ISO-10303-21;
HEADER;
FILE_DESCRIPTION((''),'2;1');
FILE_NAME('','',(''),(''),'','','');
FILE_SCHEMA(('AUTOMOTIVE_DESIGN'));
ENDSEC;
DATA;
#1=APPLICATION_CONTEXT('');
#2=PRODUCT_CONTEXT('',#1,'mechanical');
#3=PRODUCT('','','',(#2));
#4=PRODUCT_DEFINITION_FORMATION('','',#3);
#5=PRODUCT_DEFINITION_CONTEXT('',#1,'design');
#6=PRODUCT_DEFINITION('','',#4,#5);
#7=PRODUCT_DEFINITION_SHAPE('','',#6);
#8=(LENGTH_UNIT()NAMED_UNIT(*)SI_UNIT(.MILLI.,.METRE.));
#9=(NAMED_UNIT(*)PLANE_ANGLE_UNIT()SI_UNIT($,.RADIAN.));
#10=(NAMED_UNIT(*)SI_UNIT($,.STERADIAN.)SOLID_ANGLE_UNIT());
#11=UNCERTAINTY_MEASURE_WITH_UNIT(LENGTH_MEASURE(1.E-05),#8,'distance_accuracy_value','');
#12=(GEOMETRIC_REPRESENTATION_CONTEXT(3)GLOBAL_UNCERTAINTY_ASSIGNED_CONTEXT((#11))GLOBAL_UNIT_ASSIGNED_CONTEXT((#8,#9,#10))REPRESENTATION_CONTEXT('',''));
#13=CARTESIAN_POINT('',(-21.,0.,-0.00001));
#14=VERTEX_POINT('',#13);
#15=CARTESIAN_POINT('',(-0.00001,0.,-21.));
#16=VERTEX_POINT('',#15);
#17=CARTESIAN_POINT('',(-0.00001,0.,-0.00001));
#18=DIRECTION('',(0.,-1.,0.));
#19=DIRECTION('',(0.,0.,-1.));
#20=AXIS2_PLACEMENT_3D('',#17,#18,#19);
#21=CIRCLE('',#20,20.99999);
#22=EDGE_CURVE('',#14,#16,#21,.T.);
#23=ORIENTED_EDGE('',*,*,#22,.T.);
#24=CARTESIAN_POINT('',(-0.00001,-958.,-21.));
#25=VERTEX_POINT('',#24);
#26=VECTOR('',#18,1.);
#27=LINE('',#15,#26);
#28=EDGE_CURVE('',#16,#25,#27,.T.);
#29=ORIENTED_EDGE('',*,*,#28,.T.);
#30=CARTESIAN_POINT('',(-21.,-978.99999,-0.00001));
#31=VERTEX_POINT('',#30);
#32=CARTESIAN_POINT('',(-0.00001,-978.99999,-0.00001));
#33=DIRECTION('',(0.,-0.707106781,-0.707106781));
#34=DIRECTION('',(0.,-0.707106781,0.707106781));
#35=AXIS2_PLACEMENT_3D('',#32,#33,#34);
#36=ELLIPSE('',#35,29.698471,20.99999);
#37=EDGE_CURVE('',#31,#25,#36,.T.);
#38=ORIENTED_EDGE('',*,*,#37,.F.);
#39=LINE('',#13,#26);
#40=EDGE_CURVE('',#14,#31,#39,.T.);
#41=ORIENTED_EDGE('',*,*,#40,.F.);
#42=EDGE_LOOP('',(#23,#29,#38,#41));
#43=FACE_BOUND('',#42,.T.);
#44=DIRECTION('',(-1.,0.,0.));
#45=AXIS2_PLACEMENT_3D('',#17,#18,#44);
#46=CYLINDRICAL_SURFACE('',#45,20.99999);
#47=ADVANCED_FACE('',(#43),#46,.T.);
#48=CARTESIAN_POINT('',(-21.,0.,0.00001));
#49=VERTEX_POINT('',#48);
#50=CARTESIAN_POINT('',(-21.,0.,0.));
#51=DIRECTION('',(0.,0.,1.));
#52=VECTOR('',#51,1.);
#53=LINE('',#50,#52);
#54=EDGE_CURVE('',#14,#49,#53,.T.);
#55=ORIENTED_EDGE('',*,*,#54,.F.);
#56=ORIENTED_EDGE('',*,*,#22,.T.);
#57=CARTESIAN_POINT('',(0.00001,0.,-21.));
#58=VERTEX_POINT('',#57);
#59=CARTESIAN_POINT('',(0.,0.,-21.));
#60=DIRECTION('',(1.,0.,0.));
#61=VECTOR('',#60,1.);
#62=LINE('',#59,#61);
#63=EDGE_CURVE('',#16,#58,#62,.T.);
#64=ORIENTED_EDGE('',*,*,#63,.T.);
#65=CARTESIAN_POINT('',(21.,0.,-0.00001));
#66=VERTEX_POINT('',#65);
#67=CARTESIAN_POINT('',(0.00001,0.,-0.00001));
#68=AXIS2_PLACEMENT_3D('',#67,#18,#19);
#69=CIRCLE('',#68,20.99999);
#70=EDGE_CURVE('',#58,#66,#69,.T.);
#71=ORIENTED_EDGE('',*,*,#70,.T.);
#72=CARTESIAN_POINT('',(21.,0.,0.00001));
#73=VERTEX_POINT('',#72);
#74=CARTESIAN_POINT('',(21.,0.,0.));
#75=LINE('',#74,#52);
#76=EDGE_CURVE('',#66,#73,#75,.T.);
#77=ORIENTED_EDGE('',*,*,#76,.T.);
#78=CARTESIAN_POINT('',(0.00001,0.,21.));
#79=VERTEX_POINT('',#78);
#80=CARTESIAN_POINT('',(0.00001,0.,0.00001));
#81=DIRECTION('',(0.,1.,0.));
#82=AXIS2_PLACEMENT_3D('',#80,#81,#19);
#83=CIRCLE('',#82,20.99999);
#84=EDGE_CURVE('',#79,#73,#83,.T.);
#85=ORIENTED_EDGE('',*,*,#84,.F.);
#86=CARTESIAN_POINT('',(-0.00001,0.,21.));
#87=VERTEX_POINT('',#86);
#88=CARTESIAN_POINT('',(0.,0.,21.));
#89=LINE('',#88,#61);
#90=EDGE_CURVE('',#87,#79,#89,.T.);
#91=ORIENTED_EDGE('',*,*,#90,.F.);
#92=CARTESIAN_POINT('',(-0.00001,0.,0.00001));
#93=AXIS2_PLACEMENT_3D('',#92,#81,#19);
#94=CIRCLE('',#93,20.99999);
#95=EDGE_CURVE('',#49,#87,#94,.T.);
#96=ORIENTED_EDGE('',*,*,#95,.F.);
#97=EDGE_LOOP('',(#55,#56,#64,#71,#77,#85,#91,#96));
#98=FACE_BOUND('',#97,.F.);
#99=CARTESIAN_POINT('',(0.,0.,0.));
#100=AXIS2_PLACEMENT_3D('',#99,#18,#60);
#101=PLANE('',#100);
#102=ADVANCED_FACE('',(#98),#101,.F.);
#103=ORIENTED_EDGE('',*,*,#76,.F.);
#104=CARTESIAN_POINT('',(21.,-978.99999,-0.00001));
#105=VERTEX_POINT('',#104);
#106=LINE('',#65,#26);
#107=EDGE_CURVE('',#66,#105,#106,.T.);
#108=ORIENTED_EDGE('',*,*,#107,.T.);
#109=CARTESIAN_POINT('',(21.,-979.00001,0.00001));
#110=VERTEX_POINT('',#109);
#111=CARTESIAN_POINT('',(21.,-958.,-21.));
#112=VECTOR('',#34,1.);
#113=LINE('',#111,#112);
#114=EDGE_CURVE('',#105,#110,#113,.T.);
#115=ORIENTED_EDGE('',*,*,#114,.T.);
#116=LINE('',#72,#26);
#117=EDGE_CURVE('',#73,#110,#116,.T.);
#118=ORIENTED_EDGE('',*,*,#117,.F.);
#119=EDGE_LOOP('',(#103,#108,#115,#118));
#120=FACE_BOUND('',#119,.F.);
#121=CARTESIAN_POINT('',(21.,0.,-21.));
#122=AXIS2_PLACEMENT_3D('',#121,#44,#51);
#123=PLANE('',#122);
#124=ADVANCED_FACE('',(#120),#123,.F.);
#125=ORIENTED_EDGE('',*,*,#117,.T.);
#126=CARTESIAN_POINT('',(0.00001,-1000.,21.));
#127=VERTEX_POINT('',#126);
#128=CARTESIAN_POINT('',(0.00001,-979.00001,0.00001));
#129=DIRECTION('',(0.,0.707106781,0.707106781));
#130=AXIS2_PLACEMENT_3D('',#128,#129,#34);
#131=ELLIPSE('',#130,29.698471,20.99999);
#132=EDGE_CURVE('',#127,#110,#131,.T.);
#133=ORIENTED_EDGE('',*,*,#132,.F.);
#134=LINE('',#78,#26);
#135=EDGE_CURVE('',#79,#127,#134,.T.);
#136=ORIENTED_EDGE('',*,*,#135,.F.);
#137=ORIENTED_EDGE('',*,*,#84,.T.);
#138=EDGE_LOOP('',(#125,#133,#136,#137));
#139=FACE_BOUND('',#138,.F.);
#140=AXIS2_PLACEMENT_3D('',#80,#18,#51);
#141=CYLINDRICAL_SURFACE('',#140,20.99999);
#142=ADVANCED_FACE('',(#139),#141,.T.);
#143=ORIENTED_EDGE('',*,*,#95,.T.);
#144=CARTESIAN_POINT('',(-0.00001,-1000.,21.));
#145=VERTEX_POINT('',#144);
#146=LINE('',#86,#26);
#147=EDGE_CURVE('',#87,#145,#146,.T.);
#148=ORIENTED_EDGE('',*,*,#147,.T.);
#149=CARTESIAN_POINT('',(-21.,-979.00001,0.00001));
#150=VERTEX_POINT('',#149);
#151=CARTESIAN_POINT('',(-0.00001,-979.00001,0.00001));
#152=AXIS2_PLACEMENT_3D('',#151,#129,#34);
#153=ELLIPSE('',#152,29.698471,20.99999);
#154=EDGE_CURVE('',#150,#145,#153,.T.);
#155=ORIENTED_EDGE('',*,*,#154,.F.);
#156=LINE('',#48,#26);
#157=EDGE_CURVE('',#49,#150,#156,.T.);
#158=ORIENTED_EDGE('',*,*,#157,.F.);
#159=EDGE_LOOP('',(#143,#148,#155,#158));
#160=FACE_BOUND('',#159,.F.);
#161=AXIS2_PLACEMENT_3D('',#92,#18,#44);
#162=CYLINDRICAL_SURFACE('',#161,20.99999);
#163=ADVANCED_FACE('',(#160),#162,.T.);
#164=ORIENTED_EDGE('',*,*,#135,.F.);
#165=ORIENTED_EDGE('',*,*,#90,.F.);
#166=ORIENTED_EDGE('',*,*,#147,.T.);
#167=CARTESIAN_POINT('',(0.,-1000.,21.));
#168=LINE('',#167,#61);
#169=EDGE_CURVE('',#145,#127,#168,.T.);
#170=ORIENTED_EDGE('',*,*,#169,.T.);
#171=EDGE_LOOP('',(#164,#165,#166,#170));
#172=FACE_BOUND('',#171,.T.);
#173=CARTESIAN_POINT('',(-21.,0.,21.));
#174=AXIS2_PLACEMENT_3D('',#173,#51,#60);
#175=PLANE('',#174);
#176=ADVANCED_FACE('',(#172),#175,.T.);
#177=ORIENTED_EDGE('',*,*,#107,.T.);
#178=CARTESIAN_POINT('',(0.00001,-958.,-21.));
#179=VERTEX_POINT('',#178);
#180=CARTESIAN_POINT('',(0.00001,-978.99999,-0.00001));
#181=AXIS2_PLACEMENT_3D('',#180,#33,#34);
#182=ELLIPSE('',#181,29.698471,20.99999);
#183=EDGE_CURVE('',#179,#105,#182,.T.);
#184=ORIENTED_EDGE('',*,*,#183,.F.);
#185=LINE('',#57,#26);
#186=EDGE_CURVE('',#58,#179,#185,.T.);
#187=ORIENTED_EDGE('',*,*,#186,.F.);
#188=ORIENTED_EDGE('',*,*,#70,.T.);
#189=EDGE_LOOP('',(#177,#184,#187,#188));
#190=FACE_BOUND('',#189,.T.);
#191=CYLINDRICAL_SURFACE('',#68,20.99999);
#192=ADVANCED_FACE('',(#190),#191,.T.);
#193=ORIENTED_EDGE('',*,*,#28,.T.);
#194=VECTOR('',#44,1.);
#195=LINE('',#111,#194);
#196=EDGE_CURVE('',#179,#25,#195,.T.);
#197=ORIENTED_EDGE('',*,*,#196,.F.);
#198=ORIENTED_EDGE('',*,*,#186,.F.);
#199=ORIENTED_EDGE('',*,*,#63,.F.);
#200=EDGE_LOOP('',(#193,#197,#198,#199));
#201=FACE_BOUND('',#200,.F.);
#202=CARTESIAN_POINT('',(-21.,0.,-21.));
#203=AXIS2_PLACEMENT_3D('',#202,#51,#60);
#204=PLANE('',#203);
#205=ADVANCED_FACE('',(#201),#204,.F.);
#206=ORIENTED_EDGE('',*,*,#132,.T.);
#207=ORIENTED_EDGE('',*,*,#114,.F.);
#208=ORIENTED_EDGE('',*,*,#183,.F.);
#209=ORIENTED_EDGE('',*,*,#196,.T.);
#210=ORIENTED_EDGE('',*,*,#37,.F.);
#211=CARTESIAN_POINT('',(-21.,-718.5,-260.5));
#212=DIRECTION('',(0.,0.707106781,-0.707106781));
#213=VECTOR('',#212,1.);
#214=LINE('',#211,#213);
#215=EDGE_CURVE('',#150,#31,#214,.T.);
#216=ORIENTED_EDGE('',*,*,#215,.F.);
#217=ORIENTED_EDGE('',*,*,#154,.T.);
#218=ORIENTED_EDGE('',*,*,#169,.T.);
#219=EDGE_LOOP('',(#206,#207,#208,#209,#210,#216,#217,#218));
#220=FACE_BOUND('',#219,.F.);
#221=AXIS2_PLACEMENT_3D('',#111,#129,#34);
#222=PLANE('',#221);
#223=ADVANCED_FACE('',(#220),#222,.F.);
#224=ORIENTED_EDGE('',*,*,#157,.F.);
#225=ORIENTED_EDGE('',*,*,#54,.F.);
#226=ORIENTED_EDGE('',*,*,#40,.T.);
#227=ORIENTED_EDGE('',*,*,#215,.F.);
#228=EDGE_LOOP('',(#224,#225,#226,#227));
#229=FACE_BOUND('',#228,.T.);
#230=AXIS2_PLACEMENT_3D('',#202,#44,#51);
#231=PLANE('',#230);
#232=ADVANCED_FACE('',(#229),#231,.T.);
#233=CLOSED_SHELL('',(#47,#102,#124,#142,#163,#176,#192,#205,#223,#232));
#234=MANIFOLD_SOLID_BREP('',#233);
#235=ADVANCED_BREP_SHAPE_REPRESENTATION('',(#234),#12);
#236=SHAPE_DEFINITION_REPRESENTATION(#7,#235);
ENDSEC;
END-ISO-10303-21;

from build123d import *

# Parameters (mm, degrees)
F0_W     = 42
F0_H     = 42
F1_DEPTH = 1000
F3_DEPTH = 100
F4_R     = 20.99999


# Not quite as in the source:
# - a fillet or chamfer is up to 0.001 mm smaller than in the source, because OpenCascade refuses the exact size


with BuildPart() as f1:
    # F0 (on Front) → F1 (new body)
    with BuildSketch(Plane.XZ):
        Rectangle(F0_W, F0_H)
    extrude(amount=F1_DEPTH)

    # F2 (on face) → F3 (cut)
    with BuildSketch(Plane.YZ.offset(21)):
        Polygon((-958, -21), (-1000, 21), (-1000, -21), align=None)
    extrude(amount=-F3_DEPTH, mode=Mode.SUBTRACT)

    # F4 (radius 21 in the source; OpenCascade refuses exactly that, so slightly less here)
    f4_edges = [f1.edges().sort_by_distance(p)[0] for p in [
        (21, -500, 21),
        (21, -479, -21),
        (-21, -479, -21),
        (-21, -500, 21),
    ]]
    fillet(f4_edges, radius=F4_R)


solid = f1.part
